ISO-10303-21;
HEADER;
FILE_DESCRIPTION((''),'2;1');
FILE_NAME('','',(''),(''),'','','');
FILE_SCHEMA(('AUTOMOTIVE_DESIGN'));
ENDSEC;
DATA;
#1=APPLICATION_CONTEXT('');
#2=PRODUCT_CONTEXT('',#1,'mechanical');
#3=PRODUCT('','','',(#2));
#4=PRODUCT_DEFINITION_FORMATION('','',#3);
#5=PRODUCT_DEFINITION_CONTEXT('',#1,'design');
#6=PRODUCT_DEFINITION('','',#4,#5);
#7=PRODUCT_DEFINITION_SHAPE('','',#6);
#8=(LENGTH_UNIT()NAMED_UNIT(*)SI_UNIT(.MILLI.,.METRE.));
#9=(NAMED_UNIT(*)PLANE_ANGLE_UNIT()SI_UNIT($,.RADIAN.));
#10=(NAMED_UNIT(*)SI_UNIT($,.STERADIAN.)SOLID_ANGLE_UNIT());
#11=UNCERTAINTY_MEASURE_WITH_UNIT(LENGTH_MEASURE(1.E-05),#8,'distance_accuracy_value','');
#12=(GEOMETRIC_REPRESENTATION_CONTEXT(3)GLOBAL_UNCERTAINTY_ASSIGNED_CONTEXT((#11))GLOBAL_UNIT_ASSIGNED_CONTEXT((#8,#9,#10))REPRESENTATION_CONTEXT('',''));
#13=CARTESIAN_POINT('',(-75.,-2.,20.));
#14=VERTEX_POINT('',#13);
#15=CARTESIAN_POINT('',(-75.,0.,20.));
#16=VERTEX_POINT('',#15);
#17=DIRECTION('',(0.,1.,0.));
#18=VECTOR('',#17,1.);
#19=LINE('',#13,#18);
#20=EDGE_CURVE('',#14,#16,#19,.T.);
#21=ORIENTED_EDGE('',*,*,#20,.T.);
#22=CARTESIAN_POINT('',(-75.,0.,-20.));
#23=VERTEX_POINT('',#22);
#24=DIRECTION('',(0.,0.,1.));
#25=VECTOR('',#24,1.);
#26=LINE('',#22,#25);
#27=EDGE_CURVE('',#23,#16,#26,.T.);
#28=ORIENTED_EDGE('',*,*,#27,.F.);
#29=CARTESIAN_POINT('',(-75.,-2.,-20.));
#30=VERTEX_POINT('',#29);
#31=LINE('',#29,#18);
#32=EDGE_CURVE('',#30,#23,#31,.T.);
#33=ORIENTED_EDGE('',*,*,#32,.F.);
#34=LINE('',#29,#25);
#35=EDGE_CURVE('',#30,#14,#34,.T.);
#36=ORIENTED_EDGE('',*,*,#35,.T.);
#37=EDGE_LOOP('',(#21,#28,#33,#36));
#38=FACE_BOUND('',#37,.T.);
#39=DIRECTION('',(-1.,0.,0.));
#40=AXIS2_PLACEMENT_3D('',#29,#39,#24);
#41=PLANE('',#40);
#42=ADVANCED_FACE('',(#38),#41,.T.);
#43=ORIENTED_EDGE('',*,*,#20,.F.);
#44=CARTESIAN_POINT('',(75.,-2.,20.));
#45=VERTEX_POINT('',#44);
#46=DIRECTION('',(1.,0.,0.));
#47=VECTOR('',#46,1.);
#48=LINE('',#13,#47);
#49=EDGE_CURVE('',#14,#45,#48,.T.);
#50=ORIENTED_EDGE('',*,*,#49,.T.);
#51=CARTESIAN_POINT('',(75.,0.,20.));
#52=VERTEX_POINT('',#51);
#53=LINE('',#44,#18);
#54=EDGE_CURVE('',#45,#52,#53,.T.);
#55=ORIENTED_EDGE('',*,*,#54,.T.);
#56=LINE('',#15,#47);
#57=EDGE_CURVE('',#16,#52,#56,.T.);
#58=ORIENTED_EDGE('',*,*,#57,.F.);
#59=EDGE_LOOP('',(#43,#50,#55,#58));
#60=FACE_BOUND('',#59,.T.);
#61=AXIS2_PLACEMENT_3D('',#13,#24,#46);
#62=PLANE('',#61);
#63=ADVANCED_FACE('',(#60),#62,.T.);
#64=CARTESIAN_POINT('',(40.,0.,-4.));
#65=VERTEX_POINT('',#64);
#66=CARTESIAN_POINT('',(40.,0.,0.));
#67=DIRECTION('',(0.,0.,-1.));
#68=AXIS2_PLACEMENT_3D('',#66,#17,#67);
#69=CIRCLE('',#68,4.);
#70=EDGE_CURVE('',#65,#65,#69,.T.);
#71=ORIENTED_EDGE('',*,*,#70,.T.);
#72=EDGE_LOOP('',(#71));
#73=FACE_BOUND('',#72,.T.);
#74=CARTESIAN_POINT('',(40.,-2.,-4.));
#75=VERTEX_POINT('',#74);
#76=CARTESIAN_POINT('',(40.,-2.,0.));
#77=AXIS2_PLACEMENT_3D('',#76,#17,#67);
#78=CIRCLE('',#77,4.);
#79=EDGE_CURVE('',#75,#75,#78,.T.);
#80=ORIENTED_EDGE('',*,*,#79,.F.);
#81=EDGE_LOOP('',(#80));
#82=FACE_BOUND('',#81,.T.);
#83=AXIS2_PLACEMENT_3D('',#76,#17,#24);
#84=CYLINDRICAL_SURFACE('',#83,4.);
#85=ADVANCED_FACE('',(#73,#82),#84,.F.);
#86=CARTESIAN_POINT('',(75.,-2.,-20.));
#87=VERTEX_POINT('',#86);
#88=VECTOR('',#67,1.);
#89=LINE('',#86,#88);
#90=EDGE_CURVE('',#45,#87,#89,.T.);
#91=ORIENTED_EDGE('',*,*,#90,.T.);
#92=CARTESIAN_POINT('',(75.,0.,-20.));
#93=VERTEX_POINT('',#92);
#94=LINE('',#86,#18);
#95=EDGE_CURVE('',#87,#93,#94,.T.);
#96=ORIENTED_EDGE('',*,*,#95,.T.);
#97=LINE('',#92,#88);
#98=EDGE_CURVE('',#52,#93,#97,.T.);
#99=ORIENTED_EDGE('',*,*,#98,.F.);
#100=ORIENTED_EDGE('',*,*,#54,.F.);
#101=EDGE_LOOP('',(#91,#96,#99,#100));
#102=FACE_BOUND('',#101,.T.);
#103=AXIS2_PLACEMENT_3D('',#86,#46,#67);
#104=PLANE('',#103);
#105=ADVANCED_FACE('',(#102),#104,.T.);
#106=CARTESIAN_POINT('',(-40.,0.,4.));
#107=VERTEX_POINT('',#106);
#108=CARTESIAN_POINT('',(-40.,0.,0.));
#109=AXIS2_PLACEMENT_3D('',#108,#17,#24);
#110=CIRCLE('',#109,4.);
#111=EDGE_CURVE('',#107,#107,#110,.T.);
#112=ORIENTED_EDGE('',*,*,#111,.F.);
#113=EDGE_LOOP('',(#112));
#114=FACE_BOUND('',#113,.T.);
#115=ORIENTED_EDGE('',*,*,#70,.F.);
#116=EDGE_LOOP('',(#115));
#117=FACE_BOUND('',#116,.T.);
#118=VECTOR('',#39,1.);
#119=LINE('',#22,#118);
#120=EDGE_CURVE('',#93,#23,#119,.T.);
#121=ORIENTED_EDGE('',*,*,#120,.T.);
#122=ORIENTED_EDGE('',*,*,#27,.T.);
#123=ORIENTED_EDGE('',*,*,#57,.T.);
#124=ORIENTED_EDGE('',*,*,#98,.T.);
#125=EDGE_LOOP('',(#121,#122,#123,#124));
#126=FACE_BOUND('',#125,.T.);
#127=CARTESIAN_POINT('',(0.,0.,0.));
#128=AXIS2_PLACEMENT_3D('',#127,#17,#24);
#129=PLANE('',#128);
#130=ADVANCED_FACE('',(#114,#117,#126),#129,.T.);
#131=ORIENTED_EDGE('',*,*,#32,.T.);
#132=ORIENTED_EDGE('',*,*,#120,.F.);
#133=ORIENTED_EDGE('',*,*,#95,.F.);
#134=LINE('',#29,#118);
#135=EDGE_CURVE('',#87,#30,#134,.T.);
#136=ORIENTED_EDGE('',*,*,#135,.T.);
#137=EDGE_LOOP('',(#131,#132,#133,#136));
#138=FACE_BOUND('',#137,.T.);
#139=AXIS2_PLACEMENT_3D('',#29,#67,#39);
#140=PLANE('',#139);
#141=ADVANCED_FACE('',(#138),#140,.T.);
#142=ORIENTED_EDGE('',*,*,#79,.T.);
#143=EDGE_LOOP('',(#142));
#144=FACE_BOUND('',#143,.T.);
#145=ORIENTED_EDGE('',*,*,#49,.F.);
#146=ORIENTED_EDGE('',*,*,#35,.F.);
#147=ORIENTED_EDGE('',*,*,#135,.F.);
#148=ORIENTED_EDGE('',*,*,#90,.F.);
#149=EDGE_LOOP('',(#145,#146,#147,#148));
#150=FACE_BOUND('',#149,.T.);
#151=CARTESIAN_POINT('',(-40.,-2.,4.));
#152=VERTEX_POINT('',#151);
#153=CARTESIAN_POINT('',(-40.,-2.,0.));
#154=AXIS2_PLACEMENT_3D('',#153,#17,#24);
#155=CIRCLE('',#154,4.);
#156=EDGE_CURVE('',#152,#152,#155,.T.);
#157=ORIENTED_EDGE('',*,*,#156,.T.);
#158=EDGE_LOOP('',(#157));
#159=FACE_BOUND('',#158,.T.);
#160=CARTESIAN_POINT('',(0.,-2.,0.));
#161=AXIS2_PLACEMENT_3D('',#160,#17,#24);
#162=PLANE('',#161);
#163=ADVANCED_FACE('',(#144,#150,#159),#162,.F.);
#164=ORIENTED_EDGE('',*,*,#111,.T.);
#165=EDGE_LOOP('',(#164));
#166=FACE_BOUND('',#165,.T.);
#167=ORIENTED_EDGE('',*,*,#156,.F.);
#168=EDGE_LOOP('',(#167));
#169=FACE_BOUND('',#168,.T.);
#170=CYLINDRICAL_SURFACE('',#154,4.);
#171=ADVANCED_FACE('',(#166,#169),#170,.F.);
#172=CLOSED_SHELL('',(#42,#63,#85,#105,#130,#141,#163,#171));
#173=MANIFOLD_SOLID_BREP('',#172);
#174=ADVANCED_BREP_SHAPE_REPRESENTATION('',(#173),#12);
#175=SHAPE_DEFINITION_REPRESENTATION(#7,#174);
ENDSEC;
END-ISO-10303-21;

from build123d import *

# Parameters (mm, degrees)
SKETCH1_W          = 150
SKETCH1_H          = 40
BASE_FLANGE1_DEPTH = 2
SKETCH4_R          = 4
CUT_EXTRUDE1_DEPTH = 2


# Sheet-metal steps are written as plain solids
with BuildPart() as part:
    # Sketch1 → Base-Flange1 (new body)
    with BuildSketch(Plane(origin=(0, 0, 0), x_dir=(1, 0, 0), z_dir=(0, 1, 0))):
        Rectangle(SKETCH1_W, SKETCH1_H)
    extrude(amount=-BASE_FLANGE1_DEPTH)

    # Sketch4 → Cut-Extrude1 (cut)
    with BuildSketch(Plane(origin=(0, 0, 0), x_dir=(1, 0, 0), z_dir=(0, 1, 0))):
        with Locations(Location((-40, 0, 0), (0, 0, 270))):
            Circle(SKETCH4_R)
        with Locations(Location((40, 0, 0), (0, 0, 90))):
            Circle(SKETCH4_R)
    extrude(amount=-CUT_EXTRUDE1_DEPTH, mode=Mode.SUBTRACT)


solid = part.part
